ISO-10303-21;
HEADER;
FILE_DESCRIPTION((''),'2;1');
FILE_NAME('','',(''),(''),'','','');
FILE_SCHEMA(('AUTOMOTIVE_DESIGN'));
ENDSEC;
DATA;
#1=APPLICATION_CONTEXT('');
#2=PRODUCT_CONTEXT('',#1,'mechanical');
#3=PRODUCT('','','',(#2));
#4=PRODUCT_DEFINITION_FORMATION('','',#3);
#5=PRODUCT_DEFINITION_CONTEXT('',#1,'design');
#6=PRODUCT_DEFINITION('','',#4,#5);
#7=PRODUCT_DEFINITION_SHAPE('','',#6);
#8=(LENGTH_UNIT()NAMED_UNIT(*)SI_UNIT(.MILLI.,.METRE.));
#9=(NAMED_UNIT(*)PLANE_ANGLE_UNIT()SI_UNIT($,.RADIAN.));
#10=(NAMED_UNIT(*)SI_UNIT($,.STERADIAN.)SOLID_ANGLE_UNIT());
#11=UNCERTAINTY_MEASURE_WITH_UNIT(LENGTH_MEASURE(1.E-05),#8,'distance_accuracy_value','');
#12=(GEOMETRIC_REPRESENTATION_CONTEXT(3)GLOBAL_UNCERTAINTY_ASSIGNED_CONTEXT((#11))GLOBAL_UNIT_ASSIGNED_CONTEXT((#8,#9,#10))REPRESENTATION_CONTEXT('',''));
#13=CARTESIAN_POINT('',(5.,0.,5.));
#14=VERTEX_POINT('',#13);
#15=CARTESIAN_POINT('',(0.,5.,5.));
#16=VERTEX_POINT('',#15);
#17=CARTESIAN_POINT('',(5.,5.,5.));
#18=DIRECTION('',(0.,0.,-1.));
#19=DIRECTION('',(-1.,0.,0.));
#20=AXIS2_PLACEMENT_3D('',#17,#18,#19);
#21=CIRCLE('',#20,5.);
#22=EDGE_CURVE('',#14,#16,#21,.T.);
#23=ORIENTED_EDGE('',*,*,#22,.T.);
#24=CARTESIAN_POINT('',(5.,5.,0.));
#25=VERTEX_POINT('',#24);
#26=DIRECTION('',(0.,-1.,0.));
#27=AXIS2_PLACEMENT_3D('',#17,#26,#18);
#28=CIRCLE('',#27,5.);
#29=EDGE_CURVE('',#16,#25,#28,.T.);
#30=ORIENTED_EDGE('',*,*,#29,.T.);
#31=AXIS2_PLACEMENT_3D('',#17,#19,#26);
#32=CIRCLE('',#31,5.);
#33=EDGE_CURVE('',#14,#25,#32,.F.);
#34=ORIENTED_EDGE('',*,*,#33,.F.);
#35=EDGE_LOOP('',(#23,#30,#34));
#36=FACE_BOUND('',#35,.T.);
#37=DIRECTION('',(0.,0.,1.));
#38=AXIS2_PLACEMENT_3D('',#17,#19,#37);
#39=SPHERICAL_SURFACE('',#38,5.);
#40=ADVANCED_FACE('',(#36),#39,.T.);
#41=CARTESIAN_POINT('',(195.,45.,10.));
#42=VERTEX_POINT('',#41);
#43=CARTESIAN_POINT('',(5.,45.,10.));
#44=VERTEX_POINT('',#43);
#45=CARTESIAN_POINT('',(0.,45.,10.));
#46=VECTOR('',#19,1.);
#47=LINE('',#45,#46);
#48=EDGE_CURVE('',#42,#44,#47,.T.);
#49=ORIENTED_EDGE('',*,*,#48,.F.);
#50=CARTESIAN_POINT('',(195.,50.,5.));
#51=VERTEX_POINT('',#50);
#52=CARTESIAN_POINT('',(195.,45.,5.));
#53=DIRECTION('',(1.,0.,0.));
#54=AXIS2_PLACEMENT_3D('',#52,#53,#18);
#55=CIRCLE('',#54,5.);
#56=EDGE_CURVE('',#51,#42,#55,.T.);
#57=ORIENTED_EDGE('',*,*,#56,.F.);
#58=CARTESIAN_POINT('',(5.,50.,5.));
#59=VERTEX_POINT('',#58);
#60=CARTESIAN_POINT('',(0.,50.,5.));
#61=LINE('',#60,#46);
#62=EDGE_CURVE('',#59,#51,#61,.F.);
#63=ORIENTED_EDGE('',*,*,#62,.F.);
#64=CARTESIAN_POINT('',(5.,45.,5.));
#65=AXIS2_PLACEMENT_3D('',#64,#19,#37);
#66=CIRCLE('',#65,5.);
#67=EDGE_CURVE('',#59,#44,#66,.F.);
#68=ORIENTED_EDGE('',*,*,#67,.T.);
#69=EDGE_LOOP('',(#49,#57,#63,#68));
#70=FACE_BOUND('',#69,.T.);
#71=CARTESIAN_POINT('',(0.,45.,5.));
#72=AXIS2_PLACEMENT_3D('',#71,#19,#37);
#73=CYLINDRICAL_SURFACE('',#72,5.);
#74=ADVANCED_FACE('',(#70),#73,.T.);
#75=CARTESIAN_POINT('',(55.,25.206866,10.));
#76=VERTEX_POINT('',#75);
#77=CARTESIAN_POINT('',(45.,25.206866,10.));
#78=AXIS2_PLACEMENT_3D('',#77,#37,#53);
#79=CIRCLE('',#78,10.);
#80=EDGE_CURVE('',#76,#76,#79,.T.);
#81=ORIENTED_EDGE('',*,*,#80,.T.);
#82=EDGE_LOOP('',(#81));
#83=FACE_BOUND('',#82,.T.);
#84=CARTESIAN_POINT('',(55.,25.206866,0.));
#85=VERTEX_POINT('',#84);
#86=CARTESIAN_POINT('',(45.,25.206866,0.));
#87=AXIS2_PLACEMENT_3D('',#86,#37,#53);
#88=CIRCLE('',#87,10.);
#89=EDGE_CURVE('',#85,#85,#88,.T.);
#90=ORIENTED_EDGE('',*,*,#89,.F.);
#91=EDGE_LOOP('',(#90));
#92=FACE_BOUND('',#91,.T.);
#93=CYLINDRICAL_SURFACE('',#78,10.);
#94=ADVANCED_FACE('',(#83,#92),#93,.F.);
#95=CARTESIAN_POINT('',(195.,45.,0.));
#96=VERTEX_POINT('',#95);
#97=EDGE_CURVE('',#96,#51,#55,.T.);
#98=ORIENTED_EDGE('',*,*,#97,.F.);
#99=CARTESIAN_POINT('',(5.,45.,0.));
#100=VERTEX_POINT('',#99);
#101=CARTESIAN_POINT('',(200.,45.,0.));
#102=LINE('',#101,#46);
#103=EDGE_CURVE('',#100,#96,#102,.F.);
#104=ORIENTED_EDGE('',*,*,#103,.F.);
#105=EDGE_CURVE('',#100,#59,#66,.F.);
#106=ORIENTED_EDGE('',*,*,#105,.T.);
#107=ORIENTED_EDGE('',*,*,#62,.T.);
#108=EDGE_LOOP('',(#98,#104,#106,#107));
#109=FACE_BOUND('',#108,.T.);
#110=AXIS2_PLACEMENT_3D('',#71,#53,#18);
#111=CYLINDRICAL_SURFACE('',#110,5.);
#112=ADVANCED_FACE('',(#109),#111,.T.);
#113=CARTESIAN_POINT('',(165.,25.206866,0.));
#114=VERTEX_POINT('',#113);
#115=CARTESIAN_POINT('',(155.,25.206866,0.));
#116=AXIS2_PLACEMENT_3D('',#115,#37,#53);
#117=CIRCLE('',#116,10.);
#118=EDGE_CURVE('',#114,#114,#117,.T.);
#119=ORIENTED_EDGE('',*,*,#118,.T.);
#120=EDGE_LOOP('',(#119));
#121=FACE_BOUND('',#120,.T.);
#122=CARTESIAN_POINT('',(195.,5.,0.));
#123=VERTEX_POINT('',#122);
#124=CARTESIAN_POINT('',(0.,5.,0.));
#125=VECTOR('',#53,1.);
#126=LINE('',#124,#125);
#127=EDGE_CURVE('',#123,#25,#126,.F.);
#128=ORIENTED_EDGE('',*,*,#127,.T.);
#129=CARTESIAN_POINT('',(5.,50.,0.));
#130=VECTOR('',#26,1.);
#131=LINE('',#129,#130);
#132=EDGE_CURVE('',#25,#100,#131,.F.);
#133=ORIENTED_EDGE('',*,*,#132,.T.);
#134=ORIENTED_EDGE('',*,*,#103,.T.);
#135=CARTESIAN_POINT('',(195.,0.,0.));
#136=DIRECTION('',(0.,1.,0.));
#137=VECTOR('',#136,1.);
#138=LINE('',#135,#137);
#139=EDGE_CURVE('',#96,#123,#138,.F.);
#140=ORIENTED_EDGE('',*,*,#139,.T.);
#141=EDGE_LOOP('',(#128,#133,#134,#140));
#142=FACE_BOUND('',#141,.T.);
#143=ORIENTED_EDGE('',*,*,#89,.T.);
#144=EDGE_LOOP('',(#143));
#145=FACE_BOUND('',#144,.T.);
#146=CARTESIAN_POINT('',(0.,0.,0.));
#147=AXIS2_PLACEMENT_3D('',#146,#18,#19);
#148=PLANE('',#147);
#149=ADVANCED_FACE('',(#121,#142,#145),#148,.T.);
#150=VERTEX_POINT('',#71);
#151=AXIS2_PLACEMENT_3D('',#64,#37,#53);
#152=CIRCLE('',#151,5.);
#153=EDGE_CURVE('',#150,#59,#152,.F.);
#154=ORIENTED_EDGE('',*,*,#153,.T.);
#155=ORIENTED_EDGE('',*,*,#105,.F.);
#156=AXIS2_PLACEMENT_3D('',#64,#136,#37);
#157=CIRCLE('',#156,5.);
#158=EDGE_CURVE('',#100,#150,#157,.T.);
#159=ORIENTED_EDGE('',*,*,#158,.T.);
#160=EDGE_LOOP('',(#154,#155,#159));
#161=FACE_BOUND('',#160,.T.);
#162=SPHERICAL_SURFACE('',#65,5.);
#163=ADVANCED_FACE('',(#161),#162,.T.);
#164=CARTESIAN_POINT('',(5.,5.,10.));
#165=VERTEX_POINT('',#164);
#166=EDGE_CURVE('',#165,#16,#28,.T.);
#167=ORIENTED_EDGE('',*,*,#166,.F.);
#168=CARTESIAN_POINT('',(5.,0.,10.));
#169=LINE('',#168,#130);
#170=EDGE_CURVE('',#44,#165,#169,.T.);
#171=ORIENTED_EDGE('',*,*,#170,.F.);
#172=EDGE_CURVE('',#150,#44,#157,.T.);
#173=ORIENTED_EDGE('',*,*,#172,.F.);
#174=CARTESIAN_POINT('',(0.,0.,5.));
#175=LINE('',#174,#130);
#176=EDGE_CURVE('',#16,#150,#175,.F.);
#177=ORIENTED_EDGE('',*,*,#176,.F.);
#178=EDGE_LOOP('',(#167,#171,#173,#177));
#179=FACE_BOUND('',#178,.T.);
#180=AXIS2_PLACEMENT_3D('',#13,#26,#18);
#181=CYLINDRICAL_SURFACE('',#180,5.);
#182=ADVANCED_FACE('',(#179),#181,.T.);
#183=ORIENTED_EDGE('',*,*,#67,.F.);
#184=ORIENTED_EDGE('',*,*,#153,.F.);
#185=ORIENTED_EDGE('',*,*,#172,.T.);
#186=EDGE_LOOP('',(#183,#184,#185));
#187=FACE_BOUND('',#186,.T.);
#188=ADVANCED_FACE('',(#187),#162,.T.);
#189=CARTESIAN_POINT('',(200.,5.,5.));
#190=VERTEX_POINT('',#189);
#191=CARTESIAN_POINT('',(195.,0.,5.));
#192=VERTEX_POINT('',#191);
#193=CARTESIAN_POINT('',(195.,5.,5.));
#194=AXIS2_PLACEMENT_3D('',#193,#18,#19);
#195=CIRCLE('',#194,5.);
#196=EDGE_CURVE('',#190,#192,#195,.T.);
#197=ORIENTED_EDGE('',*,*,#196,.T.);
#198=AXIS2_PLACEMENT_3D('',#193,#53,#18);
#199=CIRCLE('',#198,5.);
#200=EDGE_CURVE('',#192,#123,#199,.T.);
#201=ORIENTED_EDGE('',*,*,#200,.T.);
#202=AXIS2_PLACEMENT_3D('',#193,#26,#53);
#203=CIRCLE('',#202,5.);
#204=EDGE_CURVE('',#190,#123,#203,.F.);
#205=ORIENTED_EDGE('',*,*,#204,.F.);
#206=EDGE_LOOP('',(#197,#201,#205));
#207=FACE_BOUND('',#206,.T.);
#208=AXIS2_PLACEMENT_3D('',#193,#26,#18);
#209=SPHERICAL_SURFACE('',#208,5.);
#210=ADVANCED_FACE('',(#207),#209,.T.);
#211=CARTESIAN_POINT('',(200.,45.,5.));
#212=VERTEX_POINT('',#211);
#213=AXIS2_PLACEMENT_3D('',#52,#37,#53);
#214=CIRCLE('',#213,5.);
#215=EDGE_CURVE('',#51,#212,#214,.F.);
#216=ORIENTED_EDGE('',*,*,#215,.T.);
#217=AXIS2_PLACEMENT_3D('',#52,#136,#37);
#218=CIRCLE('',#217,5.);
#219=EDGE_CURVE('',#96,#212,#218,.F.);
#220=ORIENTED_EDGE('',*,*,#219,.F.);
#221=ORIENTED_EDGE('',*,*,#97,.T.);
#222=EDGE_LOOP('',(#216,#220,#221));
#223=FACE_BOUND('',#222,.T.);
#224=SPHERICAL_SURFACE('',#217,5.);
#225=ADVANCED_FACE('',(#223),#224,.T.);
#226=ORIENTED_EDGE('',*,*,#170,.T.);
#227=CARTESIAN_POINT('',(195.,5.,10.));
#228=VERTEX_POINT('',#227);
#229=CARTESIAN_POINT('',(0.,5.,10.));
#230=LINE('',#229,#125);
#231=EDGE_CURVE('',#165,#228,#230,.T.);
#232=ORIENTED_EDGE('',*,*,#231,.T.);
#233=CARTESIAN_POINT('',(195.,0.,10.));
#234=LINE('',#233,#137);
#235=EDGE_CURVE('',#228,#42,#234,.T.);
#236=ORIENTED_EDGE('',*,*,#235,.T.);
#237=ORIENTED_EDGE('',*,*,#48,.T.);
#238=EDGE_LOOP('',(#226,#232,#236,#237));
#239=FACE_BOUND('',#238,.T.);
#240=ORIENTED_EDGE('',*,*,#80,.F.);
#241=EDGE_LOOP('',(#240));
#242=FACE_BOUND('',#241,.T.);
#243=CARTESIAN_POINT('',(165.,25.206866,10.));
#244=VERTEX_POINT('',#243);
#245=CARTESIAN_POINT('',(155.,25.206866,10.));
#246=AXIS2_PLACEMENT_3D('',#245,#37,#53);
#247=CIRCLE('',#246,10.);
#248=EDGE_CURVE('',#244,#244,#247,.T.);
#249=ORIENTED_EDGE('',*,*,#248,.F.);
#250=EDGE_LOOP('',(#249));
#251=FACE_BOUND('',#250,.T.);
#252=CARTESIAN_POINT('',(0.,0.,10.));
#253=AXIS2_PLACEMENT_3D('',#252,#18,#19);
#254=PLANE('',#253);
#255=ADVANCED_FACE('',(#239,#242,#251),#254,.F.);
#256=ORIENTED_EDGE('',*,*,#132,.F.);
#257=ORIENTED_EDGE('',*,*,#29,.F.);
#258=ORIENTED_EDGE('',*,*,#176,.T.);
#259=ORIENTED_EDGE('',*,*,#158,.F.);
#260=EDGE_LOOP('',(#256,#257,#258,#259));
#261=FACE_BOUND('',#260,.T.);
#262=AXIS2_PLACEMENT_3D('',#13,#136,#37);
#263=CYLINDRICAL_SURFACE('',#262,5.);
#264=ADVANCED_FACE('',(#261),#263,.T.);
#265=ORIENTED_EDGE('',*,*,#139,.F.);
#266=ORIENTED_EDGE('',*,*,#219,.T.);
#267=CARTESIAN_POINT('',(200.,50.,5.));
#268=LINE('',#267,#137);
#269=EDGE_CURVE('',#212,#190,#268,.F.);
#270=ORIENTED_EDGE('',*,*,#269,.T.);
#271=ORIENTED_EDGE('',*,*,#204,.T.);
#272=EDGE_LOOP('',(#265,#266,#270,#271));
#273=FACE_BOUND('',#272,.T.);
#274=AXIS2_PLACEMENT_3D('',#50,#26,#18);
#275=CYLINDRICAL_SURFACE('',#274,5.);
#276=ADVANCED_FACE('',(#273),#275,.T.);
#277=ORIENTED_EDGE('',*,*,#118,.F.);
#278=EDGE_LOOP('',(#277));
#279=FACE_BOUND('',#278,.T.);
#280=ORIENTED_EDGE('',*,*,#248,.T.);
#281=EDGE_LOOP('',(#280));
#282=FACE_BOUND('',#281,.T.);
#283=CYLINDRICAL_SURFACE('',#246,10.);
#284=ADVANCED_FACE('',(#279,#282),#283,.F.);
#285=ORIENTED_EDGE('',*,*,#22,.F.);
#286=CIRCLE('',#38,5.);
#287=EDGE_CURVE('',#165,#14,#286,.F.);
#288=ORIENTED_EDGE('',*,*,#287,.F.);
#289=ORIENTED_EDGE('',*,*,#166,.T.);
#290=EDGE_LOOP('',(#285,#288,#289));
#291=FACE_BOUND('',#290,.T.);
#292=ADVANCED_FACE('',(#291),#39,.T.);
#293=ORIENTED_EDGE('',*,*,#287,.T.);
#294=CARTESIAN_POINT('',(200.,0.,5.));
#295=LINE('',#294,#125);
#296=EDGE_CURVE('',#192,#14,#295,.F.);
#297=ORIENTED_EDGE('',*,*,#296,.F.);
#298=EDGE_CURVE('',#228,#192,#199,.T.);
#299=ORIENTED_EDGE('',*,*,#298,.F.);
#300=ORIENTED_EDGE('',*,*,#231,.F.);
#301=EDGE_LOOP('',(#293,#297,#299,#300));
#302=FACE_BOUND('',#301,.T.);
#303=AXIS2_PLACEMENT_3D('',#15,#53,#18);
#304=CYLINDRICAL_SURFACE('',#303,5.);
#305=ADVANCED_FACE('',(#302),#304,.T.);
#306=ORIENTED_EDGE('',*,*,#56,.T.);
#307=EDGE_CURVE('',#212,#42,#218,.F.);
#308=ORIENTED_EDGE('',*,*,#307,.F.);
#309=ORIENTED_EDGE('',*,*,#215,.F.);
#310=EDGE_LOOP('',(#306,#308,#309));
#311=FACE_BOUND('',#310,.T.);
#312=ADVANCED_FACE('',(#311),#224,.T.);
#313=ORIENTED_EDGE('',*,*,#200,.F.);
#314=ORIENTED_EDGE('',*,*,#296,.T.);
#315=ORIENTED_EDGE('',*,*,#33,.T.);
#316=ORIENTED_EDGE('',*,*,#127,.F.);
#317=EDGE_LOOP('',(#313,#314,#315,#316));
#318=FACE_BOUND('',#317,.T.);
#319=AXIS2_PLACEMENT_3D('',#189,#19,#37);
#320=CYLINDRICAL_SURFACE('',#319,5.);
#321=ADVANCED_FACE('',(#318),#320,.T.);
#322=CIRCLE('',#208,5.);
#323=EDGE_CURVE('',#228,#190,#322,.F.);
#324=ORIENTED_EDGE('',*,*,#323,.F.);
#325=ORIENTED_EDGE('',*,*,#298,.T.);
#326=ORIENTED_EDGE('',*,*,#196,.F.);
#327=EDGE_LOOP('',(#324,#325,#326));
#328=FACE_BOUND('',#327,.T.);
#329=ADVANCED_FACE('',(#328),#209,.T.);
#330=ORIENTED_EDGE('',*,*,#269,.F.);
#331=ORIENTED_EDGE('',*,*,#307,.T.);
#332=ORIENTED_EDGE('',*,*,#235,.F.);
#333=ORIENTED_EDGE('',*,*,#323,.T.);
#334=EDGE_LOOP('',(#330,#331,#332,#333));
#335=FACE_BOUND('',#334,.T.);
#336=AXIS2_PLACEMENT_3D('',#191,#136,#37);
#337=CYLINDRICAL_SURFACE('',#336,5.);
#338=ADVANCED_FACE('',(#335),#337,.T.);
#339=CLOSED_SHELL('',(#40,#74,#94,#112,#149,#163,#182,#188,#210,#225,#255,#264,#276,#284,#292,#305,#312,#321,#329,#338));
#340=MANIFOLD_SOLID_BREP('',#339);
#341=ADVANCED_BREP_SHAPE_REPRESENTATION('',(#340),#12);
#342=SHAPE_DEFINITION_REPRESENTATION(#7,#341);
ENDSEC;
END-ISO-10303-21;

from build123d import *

# Parameters (mm, degrees)
ESBO_O1_W                = 200
ESBO_O1_H                = 50
RESSALTO_EXTRUS_O1_DEPTH = 10
FILETE1_R                = 5
FUROS_GUIA_COM_20_0MM1_D = 20


with BuildPart() as part:
    # Esboço1 → Ressalto-extrusão1 (new body)
    with BuildSketch(Plane.XY):
        with Locations((100, 25)):
            Rectangle(ESBO_O1_W, ESBO_O1_H)
    extrude(amount=RESSALTO_EXTRUS_O1_DEPTH)

    # Filete1
    filete1_edges = [part.edges().sort_by_distance(p)[0] for p in [
        (100, 50, 10),
        (0, 25, 10),
        (100, 0, 10),
        (0, 25, 0),
        (100, 50, 0),
        (200, 25, 0),
        (100, 0, 0),
        (0, 0, 5),
        (0, 50, 5),
        (200, 50, 5),
        (200, 0, 5),
        (200, 25, 10),
    ]]
    fillet(filete1_edges, radius=FILETE1_R - 0.0001)  # a hair under: the kernel refuses the full size

    # Furos-guia com Ø20.0mm1 (through all)
    with Locations(Plane.XY.offset(10)):
        with Locations((45, 25.206865572), (155, 25.206865572)):
            Hole(FUROS_GUIA_COM_20_0MM1_D / 2)


solid = part.part
